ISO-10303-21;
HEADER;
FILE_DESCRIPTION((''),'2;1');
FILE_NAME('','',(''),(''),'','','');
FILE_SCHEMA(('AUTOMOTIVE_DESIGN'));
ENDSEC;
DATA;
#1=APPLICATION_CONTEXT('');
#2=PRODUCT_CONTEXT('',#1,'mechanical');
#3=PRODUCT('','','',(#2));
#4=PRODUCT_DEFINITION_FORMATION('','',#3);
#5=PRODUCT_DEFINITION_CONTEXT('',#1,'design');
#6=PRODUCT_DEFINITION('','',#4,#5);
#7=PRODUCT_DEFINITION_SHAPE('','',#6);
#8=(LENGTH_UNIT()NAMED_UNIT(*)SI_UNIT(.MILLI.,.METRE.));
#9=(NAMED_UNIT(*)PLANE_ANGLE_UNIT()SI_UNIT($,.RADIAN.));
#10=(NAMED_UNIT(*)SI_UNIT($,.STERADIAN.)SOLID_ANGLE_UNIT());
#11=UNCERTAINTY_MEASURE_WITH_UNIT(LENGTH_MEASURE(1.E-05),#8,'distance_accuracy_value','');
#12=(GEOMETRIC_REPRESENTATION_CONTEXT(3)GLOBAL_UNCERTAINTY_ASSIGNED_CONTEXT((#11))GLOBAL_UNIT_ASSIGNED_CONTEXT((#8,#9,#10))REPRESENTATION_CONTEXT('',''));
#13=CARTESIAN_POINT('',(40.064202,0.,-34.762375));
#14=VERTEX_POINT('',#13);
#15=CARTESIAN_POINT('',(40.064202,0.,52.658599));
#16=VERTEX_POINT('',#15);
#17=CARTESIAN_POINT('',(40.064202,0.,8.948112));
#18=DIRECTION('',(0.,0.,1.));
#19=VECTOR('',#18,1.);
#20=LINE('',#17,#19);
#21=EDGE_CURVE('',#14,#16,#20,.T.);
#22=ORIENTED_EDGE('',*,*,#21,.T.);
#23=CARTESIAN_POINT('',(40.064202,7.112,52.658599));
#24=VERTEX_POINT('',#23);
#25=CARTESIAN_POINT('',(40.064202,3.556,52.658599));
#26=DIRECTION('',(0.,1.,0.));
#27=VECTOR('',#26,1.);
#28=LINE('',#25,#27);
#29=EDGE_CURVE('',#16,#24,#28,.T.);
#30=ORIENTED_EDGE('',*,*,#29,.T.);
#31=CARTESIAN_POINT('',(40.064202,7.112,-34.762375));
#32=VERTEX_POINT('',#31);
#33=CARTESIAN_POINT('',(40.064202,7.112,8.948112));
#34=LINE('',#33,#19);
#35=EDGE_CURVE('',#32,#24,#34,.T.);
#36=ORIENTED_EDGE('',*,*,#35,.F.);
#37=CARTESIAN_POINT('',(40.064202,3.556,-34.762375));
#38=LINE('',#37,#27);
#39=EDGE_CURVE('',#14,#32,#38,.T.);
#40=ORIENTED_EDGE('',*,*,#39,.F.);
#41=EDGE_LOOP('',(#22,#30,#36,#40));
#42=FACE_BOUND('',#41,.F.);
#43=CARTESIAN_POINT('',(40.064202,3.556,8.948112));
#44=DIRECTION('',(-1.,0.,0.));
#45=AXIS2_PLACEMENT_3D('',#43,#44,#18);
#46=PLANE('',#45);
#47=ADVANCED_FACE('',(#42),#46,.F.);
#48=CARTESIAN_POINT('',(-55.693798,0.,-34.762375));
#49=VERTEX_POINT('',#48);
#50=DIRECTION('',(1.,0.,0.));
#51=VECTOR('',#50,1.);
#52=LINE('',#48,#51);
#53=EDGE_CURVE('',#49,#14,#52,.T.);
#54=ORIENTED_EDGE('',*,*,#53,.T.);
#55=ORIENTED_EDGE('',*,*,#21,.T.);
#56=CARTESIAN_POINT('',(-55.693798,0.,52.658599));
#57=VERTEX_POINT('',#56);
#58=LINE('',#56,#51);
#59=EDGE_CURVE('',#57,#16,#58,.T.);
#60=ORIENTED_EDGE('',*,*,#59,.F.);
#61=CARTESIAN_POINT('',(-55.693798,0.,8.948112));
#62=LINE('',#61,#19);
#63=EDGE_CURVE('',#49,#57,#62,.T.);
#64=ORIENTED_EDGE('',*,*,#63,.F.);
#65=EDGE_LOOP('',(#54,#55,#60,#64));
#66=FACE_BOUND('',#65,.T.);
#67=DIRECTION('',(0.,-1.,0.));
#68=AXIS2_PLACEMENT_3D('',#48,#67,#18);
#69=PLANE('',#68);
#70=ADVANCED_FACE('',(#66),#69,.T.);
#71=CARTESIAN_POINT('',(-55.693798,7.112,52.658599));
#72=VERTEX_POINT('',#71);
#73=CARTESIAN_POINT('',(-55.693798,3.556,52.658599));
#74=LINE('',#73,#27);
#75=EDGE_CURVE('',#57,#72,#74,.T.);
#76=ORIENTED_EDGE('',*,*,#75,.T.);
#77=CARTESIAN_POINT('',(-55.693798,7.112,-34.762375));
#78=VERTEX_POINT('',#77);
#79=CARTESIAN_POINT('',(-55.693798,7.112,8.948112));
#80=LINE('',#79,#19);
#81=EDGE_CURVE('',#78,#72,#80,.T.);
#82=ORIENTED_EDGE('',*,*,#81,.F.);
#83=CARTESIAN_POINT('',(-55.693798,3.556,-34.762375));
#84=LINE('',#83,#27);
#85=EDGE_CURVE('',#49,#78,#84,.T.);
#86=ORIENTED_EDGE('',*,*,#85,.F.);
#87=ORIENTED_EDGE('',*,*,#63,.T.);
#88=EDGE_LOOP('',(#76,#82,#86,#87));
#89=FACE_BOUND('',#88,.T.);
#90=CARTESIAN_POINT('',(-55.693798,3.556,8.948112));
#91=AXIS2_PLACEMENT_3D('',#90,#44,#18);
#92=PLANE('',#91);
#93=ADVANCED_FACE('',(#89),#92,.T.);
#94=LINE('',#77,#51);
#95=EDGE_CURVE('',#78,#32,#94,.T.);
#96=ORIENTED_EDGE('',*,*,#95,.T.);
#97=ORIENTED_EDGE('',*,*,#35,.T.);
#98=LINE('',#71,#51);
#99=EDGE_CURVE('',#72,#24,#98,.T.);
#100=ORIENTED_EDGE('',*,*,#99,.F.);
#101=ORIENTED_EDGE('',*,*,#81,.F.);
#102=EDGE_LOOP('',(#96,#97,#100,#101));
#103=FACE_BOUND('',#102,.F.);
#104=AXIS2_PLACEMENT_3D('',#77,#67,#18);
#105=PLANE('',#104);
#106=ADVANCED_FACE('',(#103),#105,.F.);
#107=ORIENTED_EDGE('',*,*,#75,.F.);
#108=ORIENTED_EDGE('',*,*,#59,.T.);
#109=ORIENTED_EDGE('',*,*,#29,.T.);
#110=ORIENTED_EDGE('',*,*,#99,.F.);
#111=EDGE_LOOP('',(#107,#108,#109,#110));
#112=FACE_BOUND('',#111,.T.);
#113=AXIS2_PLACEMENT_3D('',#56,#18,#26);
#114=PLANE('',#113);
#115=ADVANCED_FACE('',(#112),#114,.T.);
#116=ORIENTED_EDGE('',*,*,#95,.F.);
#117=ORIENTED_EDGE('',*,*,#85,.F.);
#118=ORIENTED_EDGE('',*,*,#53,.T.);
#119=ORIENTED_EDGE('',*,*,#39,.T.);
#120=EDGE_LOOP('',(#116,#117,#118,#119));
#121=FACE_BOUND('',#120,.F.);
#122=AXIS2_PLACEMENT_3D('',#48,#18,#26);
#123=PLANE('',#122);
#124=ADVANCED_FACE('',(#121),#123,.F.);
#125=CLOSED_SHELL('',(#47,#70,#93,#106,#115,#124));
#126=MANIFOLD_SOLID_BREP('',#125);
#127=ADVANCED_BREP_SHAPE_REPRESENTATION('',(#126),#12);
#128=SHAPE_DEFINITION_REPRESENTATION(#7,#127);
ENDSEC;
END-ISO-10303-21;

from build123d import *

# Parameters (mm, degrees)
F1_E2_RIGHT_W = 87.4209739268
F1_E2_RIGHT_H = 7.112
F2_DEPTH      = 95.758


with BuildPart() as f2:
    # F1_E2_right (on explicit) → F2 (new body)
    with BuildSketch(Plane(origin=(-55.6937977672, 0, -34.7623750567), x_dir=(0, 0, 1), z_dir=(-1, 0, 0))):
        with Locations((43.7104869634, 3.556)):
            Rectangle(F1_E2_RIGHT_W, F1_E2_RIGHT_H)
    extrude(amount=-F2_DEPTH)


solid = f2.part
